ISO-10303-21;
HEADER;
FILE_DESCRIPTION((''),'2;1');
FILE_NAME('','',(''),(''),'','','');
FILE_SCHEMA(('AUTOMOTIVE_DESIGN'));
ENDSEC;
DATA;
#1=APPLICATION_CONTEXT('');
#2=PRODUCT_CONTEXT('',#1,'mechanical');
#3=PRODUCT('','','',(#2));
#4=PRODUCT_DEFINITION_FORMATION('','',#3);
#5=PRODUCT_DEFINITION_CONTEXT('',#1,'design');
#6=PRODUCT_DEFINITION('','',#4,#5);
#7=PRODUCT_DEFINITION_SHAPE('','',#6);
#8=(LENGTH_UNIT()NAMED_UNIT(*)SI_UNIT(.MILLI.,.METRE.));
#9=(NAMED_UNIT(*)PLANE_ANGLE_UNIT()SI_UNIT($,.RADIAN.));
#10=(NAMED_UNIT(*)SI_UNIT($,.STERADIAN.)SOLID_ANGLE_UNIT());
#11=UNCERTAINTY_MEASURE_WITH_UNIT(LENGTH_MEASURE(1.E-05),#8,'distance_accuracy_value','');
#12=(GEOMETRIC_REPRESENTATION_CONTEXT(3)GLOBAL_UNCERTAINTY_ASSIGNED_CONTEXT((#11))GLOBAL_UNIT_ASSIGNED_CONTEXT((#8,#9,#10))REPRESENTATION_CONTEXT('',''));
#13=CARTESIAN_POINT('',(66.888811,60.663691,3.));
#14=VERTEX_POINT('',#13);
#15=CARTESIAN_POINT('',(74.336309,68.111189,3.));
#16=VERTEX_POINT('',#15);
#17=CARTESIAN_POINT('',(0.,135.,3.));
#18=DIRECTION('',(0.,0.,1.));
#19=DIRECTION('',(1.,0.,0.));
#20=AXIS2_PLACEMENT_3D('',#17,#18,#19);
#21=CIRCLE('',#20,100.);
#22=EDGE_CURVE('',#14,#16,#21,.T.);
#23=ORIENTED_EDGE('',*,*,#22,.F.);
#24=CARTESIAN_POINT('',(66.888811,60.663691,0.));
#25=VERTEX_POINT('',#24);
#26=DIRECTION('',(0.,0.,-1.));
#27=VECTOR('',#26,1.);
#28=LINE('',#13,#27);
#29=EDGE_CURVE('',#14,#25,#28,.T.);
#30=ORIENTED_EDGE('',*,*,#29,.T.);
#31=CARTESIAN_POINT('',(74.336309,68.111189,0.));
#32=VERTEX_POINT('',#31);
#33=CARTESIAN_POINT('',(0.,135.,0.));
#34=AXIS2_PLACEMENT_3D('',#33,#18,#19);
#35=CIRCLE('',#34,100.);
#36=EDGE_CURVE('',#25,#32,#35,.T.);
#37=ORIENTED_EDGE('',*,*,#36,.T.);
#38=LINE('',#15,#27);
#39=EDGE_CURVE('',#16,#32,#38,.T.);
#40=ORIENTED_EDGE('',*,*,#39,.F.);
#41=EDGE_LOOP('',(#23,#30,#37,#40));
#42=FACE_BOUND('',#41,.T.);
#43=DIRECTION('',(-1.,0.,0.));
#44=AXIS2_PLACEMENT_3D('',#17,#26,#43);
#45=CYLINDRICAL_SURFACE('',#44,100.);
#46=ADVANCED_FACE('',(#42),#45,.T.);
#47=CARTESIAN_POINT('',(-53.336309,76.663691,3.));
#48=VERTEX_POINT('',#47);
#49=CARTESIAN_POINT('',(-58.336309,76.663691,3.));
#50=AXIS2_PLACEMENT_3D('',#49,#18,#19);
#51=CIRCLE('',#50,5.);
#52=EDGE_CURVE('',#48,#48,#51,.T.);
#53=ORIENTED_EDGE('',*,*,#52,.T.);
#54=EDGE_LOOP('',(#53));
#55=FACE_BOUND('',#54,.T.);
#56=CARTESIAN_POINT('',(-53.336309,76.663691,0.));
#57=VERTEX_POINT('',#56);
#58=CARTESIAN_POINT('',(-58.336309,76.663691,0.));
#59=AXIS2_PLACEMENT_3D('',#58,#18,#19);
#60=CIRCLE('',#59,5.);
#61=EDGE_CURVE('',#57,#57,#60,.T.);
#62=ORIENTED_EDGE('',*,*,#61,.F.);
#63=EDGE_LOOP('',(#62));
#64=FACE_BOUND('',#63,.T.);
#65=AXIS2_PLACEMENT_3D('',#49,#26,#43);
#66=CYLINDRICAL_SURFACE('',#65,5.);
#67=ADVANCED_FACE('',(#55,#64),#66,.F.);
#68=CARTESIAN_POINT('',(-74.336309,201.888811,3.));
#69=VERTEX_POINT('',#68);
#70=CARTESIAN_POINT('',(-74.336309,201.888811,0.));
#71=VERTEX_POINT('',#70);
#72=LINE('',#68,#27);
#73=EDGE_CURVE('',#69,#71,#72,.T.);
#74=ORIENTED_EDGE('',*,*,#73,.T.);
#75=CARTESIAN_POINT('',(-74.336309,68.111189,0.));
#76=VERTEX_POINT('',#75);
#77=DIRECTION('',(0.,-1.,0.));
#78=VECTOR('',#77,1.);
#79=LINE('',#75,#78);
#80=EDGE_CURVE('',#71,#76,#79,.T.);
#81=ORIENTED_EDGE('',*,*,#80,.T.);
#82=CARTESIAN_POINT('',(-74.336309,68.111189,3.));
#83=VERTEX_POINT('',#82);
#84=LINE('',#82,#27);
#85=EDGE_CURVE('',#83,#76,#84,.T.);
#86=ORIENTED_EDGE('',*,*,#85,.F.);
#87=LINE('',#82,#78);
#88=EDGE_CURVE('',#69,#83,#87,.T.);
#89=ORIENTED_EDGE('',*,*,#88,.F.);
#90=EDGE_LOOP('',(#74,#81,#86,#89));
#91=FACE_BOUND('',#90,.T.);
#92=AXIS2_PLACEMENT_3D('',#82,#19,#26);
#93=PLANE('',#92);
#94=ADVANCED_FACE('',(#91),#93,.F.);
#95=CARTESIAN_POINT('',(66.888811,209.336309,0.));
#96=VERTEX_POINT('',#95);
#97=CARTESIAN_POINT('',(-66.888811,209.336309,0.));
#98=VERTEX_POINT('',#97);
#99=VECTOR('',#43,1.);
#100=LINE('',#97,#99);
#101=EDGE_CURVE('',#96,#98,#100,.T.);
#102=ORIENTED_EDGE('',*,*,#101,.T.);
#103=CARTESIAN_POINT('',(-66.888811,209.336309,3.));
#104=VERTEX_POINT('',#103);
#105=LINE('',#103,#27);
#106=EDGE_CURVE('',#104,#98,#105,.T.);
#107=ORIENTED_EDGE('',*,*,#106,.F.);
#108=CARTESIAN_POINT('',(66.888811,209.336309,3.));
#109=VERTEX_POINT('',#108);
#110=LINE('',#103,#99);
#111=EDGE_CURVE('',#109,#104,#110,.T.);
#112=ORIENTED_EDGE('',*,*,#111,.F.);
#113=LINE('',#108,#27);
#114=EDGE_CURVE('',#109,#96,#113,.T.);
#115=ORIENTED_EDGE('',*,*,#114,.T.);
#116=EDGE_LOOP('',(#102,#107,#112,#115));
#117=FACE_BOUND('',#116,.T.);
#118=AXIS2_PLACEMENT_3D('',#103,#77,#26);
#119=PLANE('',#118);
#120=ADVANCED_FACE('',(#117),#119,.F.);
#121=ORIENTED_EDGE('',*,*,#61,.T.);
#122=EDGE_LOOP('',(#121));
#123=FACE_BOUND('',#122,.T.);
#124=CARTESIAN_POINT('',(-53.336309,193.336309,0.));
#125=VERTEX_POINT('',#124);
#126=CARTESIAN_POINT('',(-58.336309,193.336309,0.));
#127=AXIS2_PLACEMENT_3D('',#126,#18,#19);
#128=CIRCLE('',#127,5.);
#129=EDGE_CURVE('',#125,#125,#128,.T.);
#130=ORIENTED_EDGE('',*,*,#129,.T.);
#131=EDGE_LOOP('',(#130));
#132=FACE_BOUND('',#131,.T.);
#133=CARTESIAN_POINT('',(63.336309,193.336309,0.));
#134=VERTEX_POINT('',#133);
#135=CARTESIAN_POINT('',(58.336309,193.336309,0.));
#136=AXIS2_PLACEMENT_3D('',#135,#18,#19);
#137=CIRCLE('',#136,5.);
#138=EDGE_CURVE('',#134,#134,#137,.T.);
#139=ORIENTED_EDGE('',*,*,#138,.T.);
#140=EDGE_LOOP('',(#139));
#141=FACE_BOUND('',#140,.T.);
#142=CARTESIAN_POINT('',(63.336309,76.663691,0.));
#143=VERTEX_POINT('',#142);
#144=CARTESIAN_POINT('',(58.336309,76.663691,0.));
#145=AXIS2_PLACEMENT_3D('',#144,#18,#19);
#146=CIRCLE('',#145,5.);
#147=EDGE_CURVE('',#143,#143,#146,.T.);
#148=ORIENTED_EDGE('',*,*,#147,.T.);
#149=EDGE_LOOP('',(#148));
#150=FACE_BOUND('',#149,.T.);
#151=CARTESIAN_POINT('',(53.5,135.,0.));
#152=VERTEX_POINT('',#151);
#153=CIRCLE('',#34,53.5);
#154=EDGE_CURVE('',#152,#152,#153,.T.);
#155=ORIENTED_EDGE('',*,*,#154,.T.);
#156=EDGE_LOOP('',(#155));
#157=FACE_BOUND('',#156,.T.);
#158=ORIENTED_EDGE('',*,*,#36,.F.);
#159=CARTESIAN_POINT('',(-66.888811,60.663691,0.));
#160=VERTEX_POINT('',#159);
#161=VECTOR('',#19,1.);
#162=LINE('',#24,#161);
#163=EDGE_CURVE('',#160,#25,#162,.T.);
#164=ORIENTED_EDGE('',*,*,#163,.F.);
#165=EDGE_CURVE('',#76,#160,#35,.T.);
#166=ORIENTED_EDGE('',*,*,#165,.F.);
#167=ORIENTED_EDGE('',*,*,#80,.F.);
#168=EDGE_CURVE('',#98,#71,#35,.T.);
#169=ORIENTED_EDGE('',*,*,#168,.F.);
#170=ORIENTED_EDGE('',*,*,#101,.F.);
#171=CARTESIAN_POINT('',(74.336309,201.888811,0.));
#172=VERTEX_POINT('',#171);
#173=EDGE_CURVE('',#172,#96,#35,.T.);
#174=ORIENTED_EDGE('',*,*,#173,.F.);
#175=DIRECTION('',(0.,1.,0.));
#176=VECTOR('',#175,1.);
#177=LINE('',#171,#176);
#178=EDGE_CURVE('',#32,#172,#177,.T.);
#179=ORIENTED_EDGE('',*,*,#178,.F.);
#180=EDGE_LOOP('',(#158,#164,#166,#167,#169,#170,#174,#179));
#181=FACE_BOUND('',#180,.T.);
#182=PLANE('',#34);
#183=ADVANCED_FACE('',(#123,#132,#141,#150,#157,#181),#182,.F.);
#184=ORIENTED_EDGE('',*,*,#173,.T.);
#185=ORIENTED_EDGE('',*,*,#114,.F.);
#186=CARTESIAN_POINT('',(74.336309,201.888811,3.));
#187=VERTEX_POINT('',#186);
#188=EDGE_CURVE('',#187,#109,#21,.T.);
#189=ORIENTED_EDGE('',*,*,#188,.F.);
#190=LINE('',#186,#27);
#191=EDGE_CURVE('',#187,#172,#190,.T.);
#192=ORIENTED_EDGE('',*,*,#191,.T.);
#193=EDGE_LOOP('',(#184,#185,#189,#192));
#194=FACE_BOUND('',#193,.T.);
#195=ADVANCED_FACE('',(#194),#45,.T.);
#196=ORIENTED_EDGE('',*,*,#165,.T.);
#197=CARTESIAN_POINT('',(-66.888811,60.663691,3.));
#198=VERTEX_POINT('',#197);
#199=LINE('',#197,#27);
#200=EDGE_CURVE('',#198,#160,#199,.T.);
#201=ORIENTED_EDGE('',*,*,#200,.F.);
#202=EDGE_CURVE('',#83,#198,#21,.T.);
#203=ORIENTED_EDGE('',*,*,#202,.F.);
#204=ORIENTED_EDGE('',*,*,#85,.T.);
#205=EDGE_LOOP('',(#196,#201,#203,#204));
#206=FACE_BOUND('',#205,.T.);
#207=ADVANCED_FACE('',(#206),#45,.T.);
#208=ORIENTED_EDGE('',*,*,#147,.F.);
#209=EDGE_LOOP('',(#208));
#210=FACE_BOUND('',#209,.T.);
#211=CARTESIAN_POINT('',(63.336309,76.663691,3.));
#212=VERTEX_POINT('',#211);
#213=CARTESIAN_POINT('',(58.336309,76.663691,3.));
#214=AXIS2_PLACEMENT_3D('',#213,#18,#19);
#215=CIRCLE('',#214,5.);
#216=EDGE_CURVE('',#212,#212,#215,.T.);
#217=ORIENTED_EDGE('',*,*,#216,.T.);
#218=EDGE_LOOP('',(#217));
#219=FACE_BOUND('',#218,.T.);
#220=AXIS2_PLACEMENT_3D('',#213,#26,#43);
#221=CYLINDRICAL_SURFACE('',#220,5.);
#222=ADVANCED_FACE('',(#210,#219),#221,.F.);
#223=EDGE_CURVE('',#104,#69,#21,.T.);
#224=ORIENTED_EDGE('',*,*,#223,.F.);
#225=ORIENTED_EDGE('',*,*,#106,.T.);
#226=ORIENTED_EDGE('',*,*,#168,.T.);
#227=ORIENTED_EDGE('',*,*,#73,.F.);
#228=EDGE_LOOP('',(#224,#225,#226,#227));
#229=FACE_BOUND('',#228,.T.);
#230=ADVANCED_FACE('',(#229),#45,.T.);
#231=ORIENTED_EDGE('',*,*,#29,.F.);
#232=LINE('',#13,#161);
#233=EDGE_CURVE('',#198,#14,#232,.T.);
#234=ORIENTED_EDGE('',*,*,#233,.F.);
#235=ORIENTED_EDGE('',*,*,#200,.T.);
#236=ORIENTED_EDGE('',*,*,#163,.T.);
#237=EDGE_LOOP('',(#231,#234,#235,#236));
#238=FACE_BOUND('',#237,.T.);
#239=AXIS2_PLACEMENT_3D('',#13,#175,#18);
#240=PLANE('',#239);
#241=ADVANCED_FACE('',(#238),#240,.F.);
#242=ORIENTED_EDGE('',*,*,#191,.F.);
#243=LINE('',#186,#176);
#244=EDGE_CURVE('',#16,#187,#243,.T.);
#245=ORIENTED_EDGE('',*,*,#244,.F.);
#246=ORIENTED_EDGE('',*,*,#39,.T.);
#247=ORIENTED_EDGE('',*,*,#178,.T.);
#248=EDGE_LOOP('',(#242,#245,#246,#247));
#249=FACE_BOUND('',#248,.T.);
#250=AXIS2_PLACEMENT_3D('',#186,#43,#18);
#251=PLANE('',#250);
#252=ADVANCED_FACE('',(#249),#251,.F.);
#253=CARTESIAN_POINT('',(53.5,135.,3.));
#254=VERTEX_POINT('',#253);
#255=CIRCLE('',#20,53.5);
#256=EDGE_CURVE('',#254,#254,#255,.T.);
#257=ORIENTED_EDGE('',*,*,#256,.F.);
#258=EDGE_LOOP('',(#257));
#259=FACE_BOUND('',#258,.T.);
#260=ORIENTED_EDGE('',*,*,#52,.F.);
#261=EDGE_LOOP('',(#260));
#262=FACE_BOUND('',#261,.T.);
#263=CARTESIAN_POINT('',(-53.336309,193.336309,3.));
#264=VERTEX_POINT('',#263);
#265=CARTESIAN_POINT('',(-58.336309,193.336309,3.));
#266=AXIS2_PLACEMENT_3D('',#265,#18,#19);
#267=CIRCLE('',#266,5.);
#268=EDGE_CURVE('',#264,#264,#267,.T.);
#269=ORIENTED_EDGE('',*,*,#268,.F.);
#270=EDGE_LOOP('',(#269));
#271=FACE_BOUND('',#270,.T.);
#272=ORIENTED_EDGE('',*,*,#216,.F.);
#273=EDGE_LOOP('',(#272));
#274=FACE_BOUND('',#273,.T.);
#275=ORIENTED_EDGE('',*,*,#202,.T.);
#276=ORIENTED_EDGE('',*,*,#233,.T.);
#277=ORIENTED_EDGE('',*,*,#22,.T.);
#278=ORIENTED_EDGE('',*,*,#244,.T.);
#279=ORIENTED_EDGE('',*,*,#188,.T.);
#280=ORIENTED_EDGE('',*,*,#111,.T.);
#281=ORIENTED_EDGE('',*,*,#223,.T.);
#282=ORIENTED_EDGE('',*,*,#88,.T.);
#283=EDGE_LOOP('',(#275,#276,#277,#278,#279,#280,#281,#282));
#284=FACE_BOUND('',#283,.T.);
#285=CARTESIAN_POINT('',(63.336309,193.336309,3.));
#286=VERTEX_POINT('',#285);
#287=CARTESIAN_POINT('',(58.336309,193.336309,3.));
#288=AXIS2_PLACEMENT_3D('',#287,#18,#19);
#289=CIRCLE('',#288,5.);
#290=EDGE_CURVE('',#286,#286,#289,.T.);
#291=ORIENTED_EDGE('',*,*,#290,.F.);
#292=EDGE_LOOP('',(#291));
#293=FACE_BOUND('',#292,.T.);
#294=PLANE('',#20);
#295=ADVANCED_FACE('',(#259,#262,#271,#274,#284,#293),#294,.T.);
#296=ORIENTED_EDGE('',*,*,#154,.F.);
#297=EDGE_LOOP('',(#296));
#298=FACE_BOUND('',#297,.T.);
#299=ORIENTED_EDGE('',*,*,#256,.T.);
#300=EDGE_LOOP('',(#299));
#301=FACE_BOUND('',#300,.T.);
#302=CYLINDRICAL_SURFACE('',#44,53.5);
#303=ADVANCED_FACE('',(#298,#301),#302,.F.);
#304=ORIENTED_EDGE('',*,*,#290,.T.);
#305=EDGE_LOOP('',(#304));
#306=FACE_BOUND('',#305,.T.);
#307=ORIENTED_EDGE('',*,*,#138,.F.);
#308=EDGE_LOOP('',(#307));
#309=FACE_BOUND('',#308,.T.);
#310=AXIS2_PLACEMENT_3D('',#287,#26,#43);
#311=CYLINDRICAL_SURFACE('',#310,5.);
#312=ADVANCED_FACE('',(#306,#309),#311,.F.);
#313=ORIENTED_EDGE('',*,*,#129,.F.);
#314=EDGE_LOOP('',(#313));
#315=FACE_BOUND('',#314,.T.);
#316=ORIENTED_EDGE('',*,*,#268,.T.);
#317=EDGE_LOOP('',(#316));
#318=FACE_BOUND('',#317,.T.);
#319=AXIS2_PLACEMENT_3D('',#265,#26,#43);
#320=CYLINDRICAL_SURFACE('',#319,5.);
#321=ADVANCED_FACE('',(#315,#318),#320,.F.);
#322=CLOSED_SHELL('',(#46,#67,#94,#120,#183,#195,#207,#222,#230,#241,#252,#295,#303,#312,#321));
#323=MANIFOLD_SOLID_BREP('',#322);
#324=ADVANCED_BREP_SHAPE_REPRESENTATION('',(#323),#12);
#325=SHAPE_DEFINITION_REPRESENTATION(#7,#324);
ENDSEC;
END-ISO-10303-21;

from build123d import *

# Parameters (mm, degrees)
SKETCH_1_R             = 53.5
SKETCH_1_R_2           = 5
SM_BASE_FLANGE_1_DEPTH = 3


# Sheet-metal steps are written as plain solids
with BuildPart() as part:
    # Sketch 1 → Базовая кромка1 (new body)
    with BuildSketch(Plane.XY):
        with BuildLine():
            Line((66.888811454, 60.663690552), (-66.888811454, 60.663690552))
            ThreePointArc((-66.888811454, 60.663690552), (-70.710678119, 64.289321881), (-74.336309448, 68.111188546))
            Line((-74.336309448, 68.111188546), (-74.336309448, 201.888811454))
            ThreePointArc((-74.336309448, 201.888811454), (-70.710678119, 205.710678119), (-66.888811454, 209.336309448))
            Line((-66.888811454, 209.336309448), (66.888811454, 209.336309448))
            ThreePointArc((66.888811454, 209.336309448), (70.710678119, 205.710678119), (74.336309448, 201.888811454))
            Line((74.336309448, 201.888811454), (74.336309448, 68.111188546))
            ThreePointArc((74.336309448, 68.111188546), (70.710678119, 64.289321881), (66.888811454, 60.663690552))
        make_face()
        with Locations((0, 135)):
            Circle(SKETCH_1_R, mode=Mode.SUBTRACT)
        with Locations((-58.336309448, 76.663690552)):
            Circle(SKETCH_1_R_2, mode=Mode.SUBTRACT)
        with Locations((58.336309448, 76.663690552)):
            Circle(SKETCH_1_R_2, mode=Mode.SUBTRACT)
        with Locations((58.336309448, 193.336309448)):
            Circle(SKETCH_1_R_2, mode=Mode.SUBTRACT)
        with Locations((-58.336309448, 193.336309448)):
            Circle(SKETCH_1_R_2, mode=Mode.SUBTRACT)
    extrude(amount=SM_BASE_FLANGE_1_DEPTH)


solid = part.part
